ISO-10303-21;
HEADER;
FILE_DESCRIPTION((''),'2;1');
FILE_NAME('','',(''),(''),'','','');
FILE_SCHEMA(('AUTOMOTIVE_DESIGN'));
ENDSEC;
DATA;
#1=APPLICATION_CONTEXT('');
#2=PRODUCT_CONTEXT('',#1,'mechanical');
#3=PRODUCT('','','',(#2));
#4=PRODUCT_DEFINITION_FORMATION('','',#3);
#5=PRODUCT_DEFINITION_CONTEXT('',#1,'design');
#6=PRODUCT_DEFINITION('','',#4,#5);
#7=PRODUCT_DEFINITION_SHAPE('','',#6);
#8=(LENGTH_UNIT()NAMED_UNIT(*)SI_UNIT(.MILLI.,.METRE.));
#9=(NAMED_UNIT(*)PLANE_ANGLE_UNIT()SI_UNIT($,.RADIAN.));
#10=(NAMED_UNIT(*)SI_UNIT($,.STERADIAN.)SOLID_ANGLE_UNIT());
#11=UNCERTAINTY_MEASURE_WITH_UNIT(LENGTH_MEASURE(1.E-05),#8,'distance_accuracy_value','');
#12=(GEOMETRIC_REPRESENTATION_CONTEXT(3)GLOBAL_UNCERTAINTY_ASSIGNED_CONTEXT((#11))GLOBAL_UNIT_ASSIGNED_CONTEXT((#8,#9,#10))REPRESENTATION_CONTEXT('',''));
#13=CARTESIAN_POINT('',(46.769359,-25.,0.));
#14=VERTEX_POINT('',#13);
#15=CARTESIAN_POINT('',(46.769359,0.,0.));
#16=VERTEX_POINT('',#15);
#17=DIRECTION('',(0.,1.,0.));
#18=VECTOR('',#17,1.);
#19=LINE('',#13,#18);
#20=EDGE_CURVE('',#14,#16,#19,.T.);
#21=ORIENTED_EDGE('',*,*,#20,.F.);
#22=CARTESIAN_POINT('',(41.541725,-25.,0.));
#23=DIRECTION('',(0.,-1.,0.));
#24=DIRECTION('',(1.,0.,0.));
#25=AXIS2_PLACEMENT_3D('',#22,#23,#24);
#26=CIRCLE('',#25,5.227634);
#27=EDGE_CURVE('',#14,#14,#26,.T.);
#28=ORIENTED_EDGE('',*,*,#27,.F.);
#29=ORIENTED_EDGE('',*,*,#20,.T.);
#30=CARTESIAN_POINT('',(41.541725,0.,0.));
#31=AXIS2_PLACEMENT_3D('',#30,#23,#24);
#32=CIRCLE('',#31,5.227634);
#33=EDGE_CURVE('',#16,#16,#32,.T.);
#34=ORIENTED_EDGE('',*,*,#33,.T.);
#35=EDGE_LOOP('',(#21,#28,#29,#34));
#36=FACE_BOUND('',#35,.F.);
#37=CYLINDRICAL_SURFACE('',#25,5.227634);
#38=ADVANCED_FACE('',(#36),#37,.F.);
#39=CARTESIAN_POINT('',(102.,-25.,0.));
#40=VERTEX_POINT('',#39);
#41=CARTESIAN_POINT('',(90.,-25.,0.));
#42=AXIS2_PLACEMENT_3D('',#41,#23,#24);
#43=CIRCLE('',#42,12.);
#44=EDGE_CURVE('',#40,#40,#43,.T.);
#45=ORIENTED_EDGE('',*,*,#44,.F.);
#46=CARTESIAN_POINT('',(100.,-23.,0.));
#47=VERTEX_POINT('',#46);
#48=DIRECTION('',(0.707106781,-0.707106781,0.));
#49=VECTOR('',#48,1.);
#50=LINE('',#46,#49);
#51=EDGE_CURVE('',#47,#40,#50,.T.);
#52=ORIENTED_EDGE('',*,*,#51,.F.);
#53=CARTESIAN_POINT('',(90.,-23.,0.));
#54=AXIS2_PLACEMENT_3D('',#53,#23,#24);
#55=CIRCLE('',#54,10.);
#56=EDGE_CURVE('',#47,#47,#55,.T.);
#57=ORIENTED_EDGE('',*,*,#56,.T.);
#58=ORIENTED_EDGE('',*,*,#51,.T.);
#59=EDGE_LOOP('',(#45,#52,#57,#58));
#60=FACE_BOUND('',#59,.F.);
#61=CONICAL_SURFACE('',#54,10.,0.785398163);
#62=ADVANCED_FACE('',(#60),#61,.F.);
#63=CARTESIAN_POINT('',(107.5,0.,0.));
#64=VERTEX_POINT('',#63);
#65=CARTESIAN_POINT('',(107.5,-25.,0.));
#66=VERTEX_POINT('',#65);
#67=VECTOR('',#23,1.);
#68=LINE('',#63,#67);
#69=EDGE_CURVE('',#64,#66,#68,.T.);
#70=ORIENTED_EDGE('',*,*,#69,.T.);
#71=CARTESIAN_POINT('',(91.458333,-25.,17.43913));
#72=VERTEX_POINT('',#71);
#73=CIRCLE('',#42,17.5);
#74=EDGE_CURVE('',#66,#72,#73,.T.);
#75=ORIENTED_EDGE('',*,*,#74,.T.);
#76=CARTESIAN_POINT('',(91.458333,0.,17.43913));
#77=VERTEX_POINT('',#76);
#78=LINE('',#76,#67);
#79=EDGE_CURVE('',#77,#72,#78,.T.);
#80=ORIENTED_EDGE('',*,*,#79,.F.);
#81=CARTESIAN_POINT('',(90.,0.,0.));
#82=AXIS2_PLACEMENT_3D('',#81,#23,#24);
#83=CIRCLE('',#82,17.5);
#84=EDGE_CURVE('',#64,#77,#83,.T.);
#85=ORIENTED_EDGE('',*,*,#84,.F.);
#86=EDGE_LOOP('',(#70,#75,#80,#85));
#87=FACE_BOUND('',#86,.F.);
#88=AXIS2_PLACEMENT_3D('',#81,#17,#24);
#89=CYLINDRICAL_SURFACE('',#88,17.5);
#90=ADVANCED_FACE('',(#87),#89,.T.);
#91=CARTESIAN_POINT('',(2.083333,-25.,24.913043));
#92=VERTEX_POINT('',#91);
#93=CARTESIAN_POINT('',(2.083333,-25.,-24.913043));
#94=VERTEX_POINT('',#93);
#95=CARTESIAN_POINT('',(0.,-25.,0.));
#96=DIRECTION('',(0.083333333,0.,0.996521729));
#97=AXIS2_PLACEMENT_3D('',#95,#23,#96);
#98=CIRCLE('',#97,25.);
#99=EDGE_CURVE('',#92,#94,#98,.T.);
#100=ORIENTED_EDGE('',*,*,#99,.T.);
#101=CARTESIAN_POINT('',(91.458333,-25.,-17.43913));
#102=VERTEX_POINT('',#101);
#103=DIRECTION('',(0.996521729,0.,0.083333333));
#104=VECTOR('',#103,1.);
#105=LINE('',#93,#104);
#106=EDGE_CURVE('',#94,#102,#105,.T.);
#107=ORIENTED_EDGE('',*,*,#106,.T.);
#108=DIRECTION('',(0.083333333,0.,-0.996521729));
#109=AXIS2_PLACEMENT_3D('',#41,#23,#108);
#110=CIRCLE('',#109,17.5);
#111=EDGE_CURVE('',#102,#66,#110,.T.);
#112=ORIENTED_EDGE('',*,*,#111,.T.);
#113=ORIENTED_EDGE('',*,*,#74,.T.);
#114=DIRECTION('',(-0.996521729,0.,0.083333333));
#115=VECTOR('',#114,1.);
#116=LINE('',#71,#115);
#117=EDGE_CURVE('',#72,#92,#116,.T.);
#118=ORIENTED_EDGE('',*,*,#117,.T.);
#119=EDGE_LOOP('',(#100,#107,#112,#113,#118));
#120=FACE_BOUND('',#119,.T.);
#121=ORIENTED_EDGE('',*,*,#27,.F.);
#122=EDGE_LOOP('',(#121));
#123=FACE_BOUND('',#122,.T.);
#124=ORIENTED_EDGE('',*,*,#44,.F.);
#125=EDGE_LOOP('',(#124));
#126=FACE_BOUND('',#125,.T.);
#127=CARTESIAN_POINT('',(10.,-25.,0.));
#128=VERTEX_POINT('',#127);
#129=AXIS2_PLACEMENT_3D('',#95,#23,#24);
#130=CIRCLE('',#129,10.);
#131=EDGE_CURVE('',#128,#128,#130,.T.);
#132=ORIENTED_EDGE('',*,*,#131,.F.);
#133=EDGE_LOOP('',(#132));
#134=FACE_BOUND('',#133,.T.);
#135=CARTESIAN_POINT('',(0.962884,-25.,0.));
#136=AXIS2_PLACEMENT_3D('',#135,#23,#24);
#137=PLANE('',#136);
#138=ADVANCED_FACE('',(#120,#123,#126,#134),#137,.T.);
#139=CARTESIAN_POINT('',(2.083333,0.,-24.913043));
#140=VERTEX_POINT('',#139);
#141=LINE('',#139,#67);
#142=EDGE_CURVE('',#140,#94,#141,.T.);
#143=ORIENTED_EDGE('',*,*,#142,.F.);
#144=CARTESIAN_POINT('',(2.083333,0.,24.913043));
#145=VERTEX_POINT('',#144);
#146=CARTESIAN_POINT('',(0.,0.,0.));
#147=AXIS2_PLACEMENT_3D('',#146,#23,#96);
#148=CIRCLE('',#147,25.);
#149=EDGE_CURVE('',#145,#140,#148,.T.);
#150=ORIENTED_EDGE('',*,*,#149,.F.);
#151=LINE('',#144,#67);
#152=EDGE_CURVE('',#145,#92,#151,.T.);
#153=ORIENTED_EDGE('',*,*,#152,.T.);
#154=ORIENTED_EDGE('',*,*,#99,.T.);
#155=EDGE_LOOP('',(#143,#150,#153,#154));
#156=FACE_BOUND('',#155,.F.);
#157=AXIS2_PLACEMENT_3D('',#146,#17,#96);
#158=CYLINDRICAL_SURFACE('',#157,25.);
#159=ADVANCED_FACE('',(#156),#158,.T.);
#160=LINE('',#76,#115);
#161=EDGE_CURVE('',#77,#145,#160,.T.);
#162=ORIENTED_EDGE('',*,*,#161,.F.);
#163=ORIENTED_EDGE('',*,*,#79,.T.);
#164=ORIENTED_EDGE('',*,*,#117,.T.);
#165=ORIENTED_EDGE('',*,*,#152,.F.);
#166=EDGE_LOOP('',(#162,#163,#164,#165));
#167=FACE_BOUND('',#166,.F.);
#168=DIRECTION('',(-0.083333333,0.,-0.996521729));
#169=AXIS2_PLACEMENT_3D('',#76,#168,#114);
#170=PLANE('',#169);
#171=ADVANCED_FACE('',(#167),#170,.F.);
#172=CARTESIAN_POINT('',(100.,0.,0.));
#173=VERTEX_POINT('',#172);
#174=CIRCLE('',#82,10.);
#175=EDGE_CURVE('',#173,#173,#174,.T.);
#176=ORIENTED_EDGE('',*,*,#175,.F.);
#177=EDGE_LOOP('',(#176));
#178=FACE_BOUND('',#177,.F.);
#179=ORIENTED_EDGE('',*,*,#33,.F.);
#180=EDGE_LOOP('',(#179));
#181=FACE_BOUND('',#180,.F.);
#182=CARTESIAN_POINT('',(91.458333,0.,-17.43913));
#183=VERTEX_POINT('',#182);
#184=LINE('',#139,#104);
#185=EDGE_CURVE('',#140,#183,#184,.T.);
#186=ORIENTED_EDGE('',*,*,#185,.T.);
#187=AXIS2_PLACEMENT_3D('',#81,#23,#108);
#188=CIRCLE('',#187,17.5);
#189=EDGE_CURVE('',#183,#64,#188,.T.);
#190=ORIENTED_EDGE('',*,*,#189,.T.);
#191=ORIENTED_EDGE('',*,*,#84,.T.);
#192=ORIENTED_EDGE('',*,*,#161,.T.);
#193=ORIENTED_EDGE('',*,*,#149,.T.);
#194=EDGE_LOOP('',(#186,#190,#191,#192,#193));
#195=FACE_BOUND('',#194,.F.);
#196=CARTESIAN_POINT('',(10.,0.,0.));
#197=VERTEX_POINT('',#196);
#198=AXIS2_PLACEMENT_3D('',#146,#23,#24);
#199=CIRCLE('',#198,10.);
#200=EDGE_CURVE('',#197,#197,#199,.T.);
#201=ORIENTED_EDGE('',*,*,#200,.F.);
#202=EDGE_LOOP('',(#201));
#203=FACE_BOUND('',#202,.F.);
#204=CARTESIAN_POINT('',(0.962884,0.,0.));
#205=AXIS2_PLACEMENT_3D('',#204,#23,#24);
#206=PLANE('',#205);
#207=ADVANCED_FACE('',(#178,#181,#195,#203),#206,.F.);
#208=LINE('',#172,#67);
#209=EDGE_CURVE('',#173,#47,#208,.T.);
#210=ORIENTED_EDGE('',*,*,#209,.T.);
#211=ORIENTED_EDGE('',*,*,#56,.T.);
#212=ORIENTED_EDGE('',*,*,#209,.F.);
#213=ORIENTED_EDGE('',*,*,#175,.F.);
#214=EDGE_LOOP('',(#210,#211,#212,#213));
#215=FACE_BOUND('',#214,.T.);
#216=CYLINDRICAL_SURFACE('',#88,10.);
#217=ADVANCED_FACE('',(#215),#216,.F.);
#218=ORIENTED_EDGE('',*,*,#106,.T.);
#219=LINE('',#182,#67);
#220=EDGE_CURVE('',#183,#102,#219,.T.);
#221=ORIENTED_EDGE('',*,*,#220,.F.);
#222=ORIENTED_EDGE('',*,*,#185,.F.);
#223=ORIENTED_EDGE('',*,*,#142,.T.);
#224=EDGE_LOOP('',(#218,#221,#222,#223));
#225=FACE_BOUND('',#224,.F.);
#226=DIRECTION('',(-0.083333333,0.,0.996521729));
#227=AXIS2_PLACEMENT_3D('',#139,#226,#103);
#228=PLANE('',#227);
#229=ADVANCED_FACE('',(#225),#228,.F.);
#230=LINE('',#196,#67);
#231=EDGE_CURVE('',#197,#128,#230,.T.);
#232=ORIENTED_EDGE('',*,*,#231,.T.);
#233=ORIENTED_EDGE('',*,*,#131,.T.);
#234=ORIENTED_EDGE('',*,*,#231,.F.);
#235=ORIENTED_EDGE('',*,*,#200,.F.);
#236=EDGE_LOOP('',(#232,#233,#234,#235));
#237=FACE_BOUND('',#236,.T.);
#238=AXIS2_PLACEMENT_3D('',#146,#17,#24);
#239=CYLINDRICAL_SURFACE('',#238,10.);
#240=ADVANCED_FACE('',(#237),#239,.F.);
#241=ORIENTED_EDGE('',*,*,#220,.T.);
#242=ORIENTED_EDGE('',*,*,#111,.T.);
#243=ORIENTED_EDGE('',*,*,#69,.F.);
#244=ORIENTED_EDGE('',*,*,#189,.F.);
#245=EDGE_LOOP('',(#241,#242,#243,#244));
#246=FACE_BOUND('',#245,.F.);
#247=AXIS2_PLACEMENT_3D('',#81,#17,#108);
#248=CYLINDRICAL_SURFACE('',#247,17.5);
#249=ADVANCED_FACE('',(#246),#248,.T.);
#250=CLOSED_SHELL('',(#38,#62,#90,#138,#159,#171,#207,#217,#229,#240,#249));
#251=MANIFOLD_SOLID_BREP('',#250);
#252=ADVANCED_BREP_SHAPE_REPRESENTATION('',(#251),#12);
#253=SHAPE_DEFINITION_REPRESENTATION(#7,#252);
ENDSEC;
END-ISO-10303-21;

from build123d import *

# Parameters (mm, degrees)
F0_R     = 10
F1_DEPTH = 25
F2_SIZE  = 2
F6_R     = 5.2276340185
F7_DEPTH = 25


# Not quite as in the source:
# - the program builds the solid bodies; features that only make, move or delete a surface that nothing else refers to are left out


with BuildPart() as f1:
    # F0 (on Front) → F1 (new body)
    with BuildSketch(Plane.XZ):
        with BuildLine():
            ThreePointArc((2.0833333333, -24.9130432148), (18.3995018048, -16.9250800097), (25, 0))
            ThreePointArc((25, 0), (18.3995018048, 16.9250800097), (2.0833333333, 24.9130432148))
            ThreePointArc((2.0833333333, 24.9130432148), (-25, 0), (2.0833333333, -24.9130432148))
        make_face()
        Circle(F0_R, mode=Mode.SUBTRACT)
        with BuildLine():
            ThreePointArc((2.0833333333, 24.9130432148), (18.3995018048, 16.9250800097), (25, 0))
            ThreePointArc((25, 0), (18.3995018048, -16.9250800097), (2.0833333333, -24.9130432148))
            Line((2.0833333333, -24.9130432148), (91.4583333333, -17.4391302504))
            ThreePointArc((91.4583333333, -17.4391302504), (72.5, 0), (91.4583333333, 17.4391302504))
            Line((91.4583333333, 17.4391302504), (2.0833333333, 24.9130432148))
        make_face()
        with BuildLine():
            ThreePointArc((107.5, 0), (102.8796512634, 11.8475560068), (91.4583333333, 17.4391302504))
            ThreePointArc((91.4583333333, 17.4391302504), (72.5, 0), (91.4583333333, -17.4391302504))
            ThreePointArc((91.4583333333, -17.4391302504), (102.8796512634, -11.8475560068), (107.5, 0))
        make_face()
        with Locations((90, 0)):
            Circle(F0_R, mode=Mode.SUBTRACT)
    extrude(amount=F1_DEPTH)

    # F2
    f2_edges = [f1.edges().sort_by_distance(p)[0] for p in [
        (80, -25, 0),
    ]]
    chamfer(f2_edges, length=F2_SIZE)

    # F6 (on face) → F7 (cut)
    with BuildSketch(Plane.XZ.offset(25)):
        with Locations((41.5417253971, 0)):
            Circle(F6_R)
    extrude(amount=-F7_DEPTH, mode=Mode.SUBTRACT)


solid = f1.part
